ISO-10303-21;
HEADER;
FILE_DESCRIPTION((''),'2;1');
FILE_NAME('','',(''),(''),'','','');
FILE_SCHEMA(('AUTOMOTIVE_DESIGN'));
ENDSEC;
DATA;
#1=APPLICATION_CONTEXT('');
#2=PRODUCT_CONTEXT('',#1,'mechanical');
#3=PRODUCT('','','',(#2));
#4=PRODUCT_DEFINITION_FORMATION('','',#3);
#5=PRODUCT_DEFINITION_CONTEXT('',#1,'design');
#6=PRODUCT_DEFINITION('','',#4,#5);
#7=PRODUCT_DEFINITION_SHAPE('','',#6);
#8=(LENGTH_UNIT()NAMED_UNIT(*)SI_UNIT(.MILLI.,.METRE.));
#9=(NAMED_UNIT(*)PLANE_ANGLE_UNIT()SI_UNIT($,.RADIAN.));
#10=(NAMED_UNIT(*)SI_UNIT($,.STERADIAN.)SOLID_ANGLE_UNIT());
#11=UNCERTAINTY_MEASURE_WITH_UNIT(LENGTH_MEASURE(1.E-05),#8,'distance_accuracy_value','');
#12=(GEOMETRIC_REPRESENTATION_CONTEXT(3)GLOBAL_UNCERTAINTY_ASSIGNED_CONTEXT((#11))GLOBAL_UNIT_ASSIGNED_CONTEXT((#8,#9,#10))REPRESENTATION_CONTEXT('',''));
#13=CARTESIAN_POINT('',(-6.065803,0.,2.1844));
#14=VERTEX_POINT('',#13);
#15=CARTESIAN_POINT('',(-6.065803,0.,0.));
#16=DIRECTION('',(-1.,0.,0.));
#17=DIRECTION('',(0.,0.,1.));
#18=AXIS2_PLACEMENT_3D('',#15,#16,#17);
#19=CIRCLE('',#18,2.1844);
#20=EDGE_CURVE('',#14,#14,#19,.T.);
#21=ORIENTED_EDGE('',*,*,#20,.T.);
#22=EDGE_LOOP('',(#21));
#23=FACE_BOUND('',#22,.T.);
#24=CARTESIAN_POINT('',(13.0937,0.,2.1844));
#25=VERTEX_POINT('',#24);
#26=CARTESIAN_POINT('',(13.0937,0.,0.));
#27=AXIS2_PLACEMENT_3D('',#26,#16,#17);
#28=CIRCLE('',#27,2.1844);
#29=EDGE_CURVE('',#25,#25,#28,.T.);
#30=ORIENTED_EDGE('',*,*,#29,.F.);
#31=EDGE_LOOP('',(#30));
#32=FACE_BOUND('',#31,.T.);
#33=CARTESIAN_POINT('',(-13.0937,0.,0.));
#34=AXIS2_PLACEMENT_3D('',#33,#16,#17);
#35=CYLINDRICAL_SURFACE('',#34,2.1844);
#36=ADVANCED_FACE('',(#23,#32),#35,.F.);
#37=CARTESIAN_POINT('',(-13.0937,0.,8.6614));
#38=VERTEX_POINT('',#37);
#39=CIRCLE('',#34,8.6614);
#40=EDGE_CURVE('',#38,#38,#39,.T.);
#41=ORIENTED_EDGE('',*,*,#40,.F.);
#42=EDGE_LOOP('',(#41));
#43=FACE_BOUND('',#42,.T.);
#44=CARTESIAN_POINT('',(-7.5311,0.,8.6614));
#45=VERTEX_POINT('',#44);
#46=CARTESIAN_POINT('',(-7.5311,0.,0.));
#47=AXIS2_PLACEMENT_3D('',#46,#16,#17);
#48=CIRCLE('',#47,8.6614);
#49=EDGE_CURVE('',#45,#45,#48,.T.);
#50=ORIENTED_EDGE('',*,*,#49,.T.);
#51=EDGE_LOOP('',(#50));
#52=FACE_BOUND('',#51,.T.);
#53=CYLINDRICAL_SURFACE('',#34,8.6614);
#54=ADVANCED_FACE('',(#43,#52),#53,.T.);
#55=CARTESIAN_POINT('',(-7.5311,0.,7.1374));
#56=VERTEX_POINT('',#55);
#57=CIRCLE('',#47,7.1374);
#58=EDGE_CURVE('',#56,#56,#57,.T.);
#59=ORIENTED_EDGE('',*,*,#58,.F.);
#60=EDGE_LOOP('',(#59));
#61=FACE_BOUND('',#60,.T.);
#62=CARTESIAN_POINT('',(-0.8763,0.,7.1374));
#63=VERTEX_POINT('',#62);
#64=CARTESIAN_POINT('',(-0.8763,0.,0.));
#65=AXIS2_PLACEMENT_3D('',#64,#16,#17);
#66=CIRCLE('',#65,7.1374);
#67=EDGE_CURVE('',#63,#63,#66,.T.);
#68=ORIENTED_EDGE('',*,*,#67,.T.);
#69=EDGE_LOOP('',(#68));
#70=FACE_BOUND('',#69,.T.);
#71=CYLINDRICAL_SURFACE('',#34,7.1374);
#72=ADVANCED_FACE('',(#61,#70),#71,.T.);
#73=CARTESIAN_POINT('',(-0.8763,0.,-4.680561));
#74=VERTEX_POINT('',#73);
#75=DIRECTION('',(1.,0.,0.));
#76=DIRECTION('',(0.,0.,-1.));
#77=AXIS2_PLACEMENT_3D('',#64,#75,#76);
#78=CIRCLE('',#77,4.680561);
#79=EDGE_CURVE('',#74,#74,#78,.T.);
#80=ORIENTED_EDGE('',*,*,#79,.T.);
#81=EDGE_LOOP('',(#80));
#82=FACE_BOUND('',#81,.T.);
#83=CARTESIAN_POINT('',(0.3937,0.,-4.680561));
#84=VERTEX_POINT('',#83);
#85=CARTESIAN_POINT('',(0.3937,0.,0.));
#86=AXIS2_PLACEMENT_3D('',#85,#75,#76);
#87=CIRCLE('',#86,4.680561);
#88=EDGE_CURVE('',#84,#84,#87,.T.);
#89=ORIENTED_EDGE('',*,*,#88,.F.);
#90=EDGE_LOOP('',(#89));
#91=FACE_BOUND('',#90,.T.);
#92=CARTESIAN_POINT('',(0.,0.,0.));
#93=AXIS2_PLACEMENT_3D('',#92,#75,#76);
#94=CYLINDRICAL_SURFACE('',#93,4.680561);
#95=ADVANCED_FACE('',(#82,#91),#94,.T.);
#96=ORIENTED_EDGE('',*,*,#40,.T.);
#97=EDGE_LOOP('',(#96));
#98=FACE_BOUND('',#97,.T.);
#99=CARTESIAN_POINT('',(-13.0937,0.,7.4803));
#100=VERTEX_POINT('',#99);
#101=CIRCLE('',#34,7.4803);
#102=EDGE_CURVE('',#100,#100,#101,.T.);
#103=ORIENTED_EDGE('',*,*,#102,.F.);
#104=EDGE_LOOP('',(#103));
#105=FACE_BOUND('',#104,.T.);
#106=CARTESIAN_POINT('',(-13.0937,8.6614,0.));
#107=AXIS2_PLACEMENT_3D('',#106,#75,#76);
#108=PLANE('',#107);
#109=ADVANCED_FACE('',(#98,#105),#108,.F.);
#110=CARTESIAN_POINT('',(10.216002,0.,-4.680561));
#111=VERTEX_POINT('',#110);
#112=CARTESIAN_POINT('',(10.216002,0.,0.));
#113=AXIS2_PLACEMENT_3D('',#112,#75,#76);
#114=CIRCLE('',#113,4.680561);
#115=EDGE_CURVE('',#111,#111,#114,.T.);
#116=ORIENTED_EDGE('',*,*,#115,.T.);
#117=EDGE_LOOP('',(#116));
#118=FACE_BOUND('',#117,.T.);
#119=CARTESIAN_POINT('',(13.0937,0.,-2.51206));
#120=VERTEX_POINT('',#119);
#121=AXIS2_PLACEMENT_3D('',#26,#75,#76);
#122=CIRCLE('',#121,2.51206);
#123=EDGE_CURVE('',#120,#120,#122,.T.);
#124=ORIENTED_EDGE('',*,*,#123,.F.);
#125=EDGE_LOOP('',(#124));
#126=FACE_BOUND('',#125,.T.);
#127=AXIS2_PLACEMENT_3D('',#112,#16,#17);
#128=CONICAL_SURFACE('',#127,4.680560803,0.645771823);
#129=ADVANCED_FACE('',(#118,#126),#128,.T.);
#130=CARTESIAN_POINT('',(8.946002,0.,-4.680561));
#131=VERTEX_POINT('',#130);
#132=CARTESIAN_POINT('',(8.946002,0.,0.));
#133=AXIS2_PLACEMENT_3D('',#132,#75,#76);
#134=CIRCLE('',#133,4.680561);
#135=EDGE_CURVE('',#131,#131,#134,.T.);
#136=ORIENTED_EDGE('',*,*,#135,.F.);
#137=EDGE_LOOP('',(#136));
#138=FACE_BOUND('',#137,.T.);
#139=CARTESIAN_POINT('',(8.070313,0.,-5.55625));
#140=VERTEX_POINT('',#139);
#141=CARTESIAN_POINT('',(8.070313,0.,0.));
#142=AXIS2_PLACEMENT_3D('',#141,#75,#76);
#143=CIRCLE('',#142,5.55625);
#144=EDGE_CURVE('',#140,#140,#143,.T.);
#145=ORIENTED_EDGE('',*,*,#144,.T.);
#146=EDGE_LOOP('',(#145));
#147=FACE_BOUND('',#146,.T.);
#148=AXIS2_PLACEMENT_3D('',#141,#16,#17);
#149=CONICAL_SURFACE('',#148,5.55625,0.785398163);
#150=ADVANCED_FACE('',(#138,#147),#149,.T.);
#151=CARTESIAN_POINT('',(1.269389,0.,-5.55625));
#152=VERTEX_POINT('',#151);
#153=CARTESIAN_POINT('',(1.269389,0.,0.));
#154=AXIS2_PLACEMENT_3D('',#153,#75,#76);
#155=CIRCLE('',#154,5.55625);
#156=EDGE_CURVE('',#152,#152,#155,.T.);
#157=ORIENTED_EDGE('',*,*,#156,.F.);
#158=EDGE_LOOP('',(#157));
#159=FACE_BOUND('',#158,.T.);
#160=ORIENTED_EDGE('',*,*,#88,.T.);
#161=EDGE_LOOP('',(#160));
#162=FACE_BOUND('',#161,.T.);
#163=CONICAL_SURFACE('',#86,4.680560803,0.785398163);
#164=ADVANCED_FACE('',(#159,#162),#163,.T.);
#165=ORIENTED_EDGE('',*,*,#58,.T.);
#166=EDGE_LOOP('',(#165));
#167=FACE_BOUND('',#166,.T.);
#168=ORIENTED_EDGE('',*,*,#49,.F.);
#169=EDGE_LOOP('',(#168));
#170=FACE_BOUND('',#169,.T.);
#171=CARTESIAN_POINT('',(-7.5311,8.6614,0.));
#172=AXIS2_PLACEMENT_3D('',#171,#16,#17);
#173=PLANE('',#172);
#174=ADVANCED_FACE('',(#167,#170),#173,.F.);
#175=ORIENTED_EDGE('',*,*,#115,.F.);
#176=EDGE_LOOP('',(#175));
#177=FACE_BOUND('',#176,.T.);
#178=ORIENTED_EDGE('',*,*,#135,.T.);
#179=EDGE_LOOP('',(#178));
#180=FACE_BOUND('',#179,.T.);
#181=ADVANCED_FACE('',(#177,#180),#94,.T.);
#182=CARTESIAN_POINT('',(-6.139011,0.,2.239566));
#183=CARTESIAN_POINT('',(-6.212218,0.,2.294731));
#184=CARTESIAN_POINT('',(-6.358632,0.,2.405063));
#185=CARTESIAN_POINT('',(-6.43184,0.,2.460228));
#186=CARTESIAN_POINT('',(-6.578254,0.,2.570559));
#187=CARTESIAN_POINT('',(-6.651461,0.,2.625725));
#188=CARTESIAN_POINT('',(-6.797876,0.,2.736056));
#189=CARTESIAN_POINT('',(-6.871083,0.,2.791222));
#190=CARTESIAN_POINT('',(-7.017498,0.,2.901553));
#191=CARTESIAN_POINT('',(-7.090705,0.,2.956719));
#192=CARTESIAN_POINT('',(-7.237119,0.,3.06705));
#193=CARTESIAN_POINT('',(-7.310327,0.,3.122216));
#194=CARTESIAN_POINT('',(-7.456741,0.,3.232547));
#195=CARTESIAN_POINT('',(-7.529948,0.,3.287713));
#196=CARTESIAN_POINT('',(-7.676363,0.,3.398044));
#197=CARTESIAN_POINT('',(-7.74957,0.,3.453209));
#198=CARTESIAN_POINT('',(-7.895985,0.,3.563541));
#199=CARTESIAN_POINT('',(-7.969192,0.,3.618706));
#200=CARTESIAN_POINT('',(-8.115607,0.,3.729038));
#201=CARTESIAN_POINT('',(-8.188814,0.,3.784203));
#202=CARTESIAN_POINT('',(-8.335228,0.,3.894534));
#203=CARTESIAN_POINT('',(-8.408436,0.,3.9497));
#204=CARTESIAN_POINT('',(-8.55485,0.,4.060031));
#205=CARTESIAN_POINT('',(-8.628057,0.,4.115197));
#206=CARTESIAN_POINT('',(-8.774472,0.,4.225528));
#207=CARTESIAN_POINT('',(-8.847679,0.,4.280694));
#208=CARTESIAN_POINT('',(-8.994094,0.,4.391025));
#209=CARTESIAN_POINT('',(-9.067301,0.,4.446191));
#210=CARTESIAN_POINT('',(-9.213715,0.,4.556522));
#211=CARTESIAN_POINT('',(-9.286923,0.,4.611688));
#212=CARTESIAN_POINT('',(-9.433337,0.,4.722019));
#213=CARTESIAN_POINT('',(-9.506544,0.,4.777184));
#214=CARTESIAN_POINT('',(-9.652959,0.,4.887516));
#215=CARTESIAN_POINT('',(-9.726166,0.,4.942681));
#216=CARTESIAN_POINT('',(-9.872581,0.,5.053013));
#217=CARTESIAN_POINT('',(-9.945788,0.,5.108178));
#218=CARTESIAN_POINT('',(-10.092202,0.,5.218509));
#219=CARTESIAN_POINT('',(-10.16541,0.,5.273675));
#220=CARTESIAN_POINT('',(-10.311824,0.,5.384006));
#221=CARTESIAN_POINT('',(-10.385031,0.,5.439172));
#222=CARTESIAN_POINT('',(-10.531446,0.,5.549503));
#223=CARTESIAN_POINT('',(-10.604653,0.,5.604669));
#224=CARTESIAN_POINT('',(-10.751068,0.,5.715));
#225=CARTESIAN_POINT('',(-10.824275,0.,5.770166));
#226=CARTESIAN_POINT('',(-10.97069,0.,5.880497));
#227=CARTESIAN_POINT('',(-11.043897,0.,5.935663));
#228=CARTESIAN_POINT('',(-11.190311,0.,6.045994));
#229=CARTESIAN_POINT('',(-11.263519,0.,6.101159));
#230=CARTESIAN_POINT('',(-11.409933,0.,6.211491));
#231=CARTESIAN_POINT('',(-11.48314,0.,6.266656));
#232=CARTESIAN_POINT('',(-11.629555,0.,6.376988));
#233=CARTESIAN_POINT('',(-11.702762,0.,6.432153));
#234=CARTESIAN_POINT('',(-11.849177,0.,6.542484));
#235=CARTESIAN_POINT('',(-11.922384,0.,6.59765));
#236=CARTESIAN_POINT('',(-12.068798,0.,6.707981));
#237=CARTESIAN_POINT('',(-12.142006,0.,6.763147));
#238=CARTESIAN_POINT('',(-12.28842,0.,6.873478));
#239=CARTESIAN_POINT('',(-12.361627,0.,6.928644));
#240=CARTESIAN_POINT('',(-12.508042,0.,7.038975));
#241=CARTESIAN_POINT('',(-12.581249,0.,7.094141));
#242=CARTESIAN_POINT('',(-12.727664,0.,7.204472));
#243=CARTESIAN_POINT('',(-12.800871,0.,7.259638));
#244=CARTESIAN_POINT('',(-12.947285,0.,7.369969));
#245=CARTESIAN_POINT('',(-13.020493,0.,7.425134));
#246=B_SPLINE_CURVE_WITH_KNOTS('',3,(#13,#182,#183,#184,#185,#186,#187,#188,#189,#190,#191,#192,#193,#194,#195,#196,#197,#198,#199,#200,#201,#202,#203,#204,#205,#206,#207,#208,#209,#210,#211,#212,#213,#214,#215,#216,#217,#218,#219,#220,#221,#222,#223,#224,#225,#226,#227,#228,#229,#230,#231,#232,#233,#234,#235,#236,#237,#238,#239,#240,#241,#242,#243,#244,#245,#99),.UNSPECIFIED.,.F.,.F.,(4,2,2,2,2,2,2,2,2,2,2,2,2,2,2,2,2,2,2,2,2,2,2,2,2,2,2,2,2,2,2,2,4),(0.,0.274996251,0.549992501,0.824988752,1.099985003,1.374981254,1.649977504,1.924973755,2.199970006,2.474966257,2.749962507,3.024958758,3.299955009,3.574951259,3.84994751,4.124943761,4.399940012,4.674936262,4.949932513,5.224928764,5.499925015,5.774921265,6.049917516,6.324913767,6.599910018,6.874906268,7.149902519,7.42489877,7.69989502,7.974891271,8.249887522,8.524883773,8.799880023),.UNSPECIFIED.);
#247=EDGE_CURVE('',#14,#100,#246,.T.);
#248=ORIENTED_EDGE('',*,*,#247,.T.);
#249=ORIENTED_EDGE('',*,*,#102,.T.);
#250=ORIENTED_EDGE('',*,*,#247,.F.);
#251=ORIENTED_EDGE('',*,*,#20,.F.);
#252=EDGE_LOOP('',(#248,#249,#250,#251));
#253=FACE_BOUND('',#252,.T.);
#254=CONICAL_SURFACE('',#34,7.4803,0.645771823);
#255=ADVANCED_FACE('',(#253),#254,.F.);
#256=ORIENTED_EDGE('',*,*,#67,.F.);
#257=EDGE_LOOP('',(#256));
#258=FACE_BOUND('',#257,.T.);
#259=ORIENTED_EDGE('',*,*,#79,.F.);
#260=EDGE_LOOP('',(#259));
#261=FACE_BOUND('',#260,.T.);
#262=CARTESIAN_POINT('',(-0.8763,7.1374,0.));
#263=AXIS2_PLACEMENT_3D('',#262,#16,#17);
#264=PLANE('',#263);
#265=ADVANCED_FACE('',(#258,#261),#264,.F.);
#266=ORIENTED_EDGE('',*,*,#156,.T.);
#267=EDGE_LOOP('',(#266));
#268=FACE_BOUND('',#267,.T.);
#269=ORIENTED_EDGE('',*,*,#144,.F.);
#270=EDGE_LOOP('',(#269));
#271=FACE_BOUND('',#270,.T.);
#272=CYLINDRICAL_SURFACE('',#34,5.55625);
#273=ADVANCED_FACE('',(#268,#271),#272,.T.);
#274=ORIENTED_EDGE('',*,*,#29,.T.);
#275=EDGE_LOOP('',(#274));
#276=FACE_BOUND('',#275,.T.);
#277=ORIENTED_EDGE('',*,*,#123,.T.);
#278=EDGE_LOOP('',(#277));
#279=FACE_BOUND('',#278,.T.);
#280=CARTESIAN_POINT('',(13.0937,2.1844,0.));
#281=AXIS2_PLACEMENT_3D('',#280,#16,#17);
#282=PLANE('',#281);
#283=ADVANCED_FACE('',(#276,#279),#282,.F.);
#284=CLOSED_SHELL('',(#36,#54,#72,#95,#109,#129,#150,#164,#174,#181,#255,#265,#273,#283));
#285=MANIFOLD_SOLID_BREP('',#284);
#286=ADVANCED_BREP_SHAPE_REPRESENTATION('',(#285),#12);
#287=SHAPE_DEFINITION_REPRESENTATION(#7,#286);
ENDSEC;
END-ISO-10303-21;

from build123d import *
from build123d.topology import SkipClean

# Parameters (mm, degrees)
CUT_SWEEP1_PITCH = 1.27


with BuildPart() as part:
    # Sketch1 → Revolve1 (revolve)
    with BuildSketch(Plane.XY, mode=Mode.PRIVATE) as revolve1_sk:
        Polygon((-13.0937, 8.6614), (-13.0937, 7.4803), (-6.065803329, 2.1844), (13.0937, 2.1844), (13.0937, 2.51206), (13.0937, 5.55625), (9.053923424, 5.55625), (-0.8763, 5.55625), (-0.8763, 7.1374), (-7.5311, 7.1374), (-7.5311, 8.6614), align=None)
    revolve(revolve1_sk.sketch.rotate(Axis((-13.0937, 0, 0), (1, 0, 0)), 90), axis=Axis((-13.0937, 0, 0), (1, 0, 0)))

    # Cut-Sweep1: the profile of Sketch4 profile screwed along a right-hand helix of 11 turns, 8 arcs to a turn; built about Z, then put on its axis
    cut_sweep1_z = Axis((0, 0, 0), (0, 0, 1))
    cut_sweep1_corners = [(5.55655, 0, 0.000173205), (5.55655, 0, -1.111423205), (4.731360803, 0, -0.635), (4.731360803, 0, -0.47625)]
    with BuildLine(mode=Mode.PRIVATE) as cut_sweep1_profile:
        Line(cut_sweep1_corners[0], cut_sweep1_corners[1])
        Line(cut_sweep1_corners[1], cut_sweep1_corners[2])
        Line(cut_sweep1_corners[2], cut_sweep1_corners[3])
        Line(cut_sweep1_corners[3], cut_sweep1_corners[0])
    cut_sweep1_cap = Face(cut_sweep1_profile.wire())
    cut_sweep1_turn_angles = [0, 22.5, 45, 67.5, 90, 112.5, 135, 157.5, 180, 202.5, 225, 247.5, 270, 292.5, 315, 337.5, 360]
    cut_sweep1_turn_weights = [1, 0.9238795325112867, 1, 0.9238795325112867, 1, 0.9238795325112867, 1, 0.9238795325112867, 1, 0.9238795325112867, 1, 0.9238795325112867, 1, 0.9238795325112867, 1, 0.9238795325112867, 1]
    cut_sweep1_turn_rails = [Edge.make_bspline([Vector(p[0], p[1], 0).rotate(cut_sweep1_z, cut_sweep1_turn_angles[k]) / cut_sweep1_turn_weights[k] + Vector(0, 0, p[2] + CUT_SWEEP1_PITCH * cut_sweep1_turn_angles[k] / 360) for k in range(17)], [0, 0, 0, 1, 1, 2, 2, 3, 3, 4, 4, 5, 5, 6, 6, 7, 7, 8, 8, 8], 2, cut_sweep1_turn_weights) for p in cut_sweep1_corners]
    cut_sweep1_turn_sides = [Face.make_surface_from_curves(cut_sweep1_turn_rails[p[0]], cut_sweep1_turn_rails[p[1]]) for p in [(0, 1), (1, 2), (2, 3), (3, 0)]]
    cut_sweep1_turn = Solid(Shell([*cut_sweep1_turn_sides, cut_sweep1_cap, cut_sweep1_cap.rotate(cut_sweep1_z, 360).moved(Location((0, 0, CUT_SWEEP1_PITCH * 360 / 360)))]))
    cut_sweep1_each = [*[cut_sweep1_turn.moved(Location((0, 0, CUT_SWEEP1_PITCH * i))) for i in range(11)]]
    add(Plane(origin=(13.0937, 0, 0), x_dir=(0, 1, 0), z_dir=(-1, 0, 0)) * Compound([cut_sweep1_each[i] for i in range(0, 11, 2)]), mode=Mode.SUBTRACT)
    add(Plane(origin=(13.0937, 0, 0), x_dir=(0, 1, 0), z_dir=(-1, 0, 0)) * Compound([cut_sweep1_each[i] for i in range(1, 11, 2)]), mode=Mode.SUBTRACT)

    # Sketch5 → Cut-Revolve1 (revolve, cut)
    with BuildSketch(Plane.XY, mode=Mode.PRIVATE) as cut_revolve1_sk:
        Polygon((13.0937, 2.51206), (10.216002239, 4.680560803), (8.946002239, 4.680560803), (8.070313042, 5.55625), (13.0937, 5.55625), align=None)
        Polygon((-0.8763, 5.55625), (-0.8763, 4.680560803), (0.3937, 4.680560803), (1.269389197, 5.55625), align=None)
    revolve(cut_revolve1_sk.sketch.rotate(Axis((0, 0, 0), (-1, 0, 0)), 90), axis=Axis((0, 0, 0), (-1, 0, 0)), mode=Mode.SUBTRACT)

    # Sketch6 → Revolve2 (revolve)
    with SkipClean():  # the faces are left unmerged after this step: merging them gives an invalid solid
        with BuildSketch(Plane.XY, mode=Mode.PRIVATE) as revolve2_sk:
            Polygon((1.269389197, 5.55625), (0.3937, 4.680560803), (8.946002239, 4.680560803), (8.070313042, 5.55625), align=None)
        revolve(revolve2_sk.sketch.rotate(Axis((0, 0, 0), (-1, 0, 0)), 90), axis=Axis((0, 0, 0), (-1, 0, 0)))
    add(part.part.scale(1), mode=Mode.REPLACE)  # the faces are merged on a copy


solid = part.part
